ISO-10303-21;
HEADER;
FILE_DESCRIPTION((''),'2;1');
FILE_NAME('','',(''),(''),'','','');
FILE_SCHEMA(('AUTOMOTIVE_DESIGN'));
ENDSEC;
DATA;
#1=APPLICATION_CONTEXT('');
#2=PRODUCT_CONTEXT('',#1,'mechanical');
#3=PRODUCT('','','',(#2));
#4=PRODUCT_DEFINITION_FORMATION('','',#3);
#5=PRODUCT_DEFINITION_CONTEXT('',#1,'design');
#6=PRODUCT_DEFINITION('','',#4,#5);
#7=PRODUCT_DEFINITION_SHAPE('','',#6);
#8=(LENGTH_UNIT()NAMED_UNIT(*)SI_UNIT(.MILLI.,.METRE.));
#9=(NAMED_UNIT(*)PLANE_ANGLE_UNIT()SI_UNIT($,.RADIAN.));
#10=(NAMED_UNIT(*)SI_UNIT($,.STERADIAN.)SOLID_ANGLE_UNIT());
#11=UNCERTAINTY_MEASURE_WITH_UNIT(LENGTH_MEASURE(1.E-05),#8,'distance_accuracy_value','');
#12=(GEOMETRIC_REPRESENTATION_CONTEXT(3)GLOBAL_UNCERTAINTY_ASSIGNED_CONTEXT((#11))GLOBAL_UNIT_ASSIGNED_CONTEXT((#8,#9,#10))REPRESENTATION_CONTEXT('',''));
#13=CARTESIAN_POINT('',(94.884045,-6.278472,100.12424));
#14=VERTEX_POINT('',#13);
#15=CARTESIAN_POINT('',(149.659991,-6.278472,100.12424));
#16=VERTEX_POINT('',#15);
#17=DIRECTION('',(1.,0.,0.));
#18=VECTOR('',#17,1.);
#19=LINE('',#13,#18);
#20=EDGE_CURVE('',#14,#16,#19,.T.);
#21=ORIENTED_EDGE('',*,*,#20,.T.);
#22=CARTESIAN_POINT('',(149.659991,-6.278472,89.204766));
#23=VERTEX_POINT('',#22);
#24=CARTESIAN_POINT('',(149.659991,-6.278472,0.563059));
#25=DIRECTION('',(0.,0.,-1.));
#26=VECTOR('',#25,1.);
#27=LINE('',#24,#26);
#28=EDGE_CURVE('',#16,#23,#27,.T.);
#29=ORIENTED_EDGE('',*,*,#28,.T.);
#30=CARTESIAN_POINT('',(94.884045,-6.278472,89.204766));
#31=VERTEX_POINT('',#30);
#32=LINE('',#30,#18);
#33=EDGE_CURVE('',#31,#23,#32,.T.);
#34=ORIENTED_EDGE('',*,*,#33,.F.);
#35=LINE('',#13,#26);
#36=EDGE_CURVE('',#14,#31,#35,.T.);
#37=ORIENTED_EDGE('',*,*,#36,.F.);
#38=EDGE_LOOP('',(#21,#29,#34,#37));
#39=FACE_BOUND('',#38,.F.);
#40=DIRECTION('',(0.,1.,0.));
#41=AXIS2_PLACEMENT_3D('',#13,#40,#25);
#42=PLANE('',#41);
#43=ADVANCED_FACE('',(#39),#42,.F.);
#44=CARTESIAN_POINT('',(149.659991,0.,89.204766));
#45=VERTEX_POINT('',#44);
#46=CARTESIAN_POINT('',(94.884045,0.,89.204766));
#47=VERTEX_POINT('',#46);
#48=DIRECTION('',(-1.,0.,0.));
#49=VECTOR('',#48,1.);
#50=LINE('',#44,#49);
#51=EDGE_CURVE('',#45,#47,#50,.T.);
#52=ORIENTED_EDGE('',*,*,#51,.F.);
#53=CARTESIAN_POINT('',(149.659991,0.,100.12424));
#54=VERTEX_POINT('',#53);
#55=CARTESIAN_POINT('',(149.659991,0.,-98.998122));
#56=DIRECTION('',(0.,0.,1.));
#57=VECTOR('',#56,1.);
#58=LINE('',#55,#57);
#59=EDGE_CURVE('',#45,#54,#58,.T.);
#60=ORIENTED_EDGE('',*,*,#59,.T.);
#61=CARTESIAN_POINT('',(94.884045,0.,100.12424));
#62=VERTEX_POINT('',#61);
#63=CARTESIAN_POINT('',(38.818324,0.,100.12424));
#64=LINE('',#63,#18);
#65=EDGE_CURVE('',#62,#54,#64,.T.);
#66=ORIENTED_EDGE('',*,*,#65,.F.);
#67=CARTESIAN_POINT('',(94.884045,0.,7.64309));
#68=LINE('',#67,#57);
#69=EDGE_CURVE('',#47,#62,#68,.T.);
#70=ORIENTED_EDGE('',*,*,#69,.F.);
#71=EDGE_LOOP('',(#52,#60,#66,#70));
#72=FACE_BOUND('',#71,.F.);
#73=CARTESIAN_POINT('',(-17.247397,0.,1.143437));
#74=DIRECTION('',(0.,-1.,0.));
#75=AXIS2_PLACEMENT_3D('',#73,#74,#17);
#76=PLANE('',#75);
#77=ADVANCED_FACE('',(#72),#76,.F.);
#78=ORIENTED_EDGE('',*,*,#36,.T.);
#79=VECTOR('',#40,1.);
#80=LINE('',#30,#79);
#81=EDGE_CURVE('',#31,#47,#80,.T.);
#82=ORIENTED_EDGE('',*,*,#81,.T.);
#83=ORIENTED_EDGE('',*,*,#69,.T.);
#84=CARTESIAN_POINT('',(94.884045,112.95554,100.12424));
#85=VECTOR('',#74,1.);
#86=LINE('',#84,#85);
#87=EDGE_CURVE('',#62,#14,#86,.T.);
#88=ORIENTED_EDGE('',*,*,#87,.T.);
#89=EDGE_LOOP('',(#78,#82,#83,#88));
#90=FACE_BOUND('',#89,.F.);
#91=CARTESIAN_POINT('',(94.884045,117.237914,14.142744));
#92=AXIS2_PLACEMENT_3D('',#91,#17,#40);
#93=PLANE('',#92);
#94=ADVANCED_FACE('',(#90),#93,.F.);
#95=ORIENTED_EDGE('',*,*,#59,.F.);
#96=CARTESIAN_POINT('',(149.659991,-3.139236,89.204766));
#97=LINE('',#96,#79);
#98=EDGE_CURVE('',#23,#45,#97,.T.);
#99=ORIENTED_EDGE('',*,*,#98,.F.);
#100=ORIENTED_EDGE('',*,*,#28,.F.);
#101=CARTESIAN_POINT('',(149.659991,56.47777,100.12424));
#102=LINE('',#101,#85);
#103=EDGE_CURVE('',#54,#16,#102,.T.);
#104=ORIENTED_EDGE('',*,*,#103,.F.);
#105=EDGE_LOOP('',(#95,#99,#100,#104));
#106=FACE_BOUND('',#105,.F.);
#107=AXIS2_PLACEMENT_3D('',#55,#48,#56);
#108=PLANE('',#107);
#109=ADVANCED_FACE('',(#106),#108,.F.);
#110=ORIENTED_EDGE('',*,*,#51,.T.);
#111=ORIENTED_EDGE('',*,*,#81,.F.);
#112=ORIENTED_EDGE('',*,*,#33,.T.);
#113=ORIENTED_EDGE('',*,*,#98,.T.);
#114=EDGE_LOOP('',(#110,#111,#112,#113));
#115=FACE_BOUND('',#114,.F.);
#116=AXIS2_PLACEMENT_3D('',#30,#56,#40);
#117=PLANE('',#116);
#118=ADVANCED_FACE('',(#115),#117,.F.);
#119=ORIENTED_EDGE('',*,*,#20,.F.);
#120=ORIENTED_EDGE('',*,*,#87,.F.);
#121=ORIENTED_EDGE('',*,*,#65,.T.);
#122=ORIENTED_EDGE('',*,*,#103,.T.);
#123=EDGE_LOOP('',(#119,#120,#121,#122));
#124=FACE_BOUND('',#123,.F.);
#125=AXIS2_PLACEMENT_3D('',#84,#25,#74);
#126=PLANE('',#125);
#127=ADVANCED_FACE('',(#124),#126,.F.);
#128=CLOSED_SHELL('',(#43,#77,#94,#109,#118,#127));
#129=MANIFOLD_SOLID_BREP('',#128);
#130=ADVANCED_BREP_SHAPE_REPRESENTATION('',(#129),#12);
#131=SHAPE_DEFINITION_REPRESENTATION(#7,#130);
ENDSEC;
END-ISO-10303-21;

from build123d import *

# Parameters (mm, degrees)
F0_W     = 60.157597065
F0_H     = 193.3636292815
F1_DEPTH = 25.4
F2_W     = 95.6334322691
F2_H     = 193.3636292815
F3_DEPTH = 346.1655080318
F4_W     = 36.0463038087
F4_H     = 45.3125461936
F4_H_2   = 28.3587574959
F4_H_3   = 42.0287176967
F4_H_4   = 40.5834168196
F5_DEPTH = 25.4
F6_W     = 173.7615093589
F6_H     = 156.2834382057
F7_DEPTH = 25.4
F8_W     = 111.7356568575
F8_H     = 18.2048454881
F8_W_2   = 24.7079984665
F8_H_2   = 0.1422166824
F8_H_3   = 10.7772573829
F8_W_3   = 37.4475419521
F9_DEPTH = 3015.5396461487


with BuildPart() as f1:
    # F0 (on Front) → F1 (new body)
    with BuildSketch(Plane.XZ):
        Polygon((0, -95.5383777618), (0, 0), (0, 97.8252515197), (-34.4947949052, 97.8252515197), (-34.4947949052, -95.5383777618), align=None)
        Polygon((-34.4947949052, 97.8252515197), (0, 97.8252515197), (16.5538433939, 97.8252515197), (16.5538433939, 130.5804550648), (-34.4947949052, 130.5804550648), (-34.4947949052, 120.8282783628), align=None)
        Polygon((16.5538433939, -95.5383777618), (0, -95.5383777618), (-34.4947949052, -95.5383777618), (-34.4947949052, -108.2416400313), (16.5538433939, -108.2416400313), (16.5538433939, -98.9981219172), align=None)
        Polygon((95.6334322691, 97.8252515197), (95.6334322691, 0), (95.6334322691, -95.5383777618), (16.5538433939, -95.5383777618), (16.5538433939, -98.9981219172), (149.6599912643, -98.9981219172), (149.6599912643, 130.5804550648), (16.5538433939, 130.5804550648), (16.5538433939, 97.8252515197), align=None)
        with Locations((-64.5735934377, 1.1434368789)):
            Rectangle(F0_W, F0_H)
        Polygon((-94.6523919702, 97.8252515197), (-34.4947949052, 97.8252515197), (-34.4947949052, 120.8282783628), (-151.3080298901, 120.8282783628), (-151.3080298901, -95.5383777618), (-94.6523919702, -95.5383777618), align=None)
    extrude(amount=F1_DEPTH)

    # F2 (on face) → F3 (join)
    with BuildSketch(Plane(origin=(0, 0, 0), x_dir=(-1, 0, 0), z_dir=(0, 1, 0))):
        Polygon((151.3080298901, 108.881868422), (-95.6334322691, 108.881868422), (-95.6334322691, 97.8252515197), (0, 97.8252515197), (0, -95.5383777618), (-95.6334322691, -95.5383777618), (-95.6334322691, -98.9981219172), (-16.5538433939, -98.9981219172), (-16.5538433939, -108.2416400313), (34.4947949052, -108.2416400313), (34.4947949052, -95.5383777618), (151.3080298901, -95.5383777618), align=None)
        with Locations((-47.8167161345, 1.1434368789)):
            Rectangle(F2_W, F2_H)
    extrude(amount=-F3_DEPTH)

    # F4 (on face) → F5 (join)
    with BuildSketch(Plane(origin=(0, 0, 0), x_dir=(-1, 0, 0), z_dir=(0, 1, 0))):
        Polygon((78.8774639368, 89.2047658563), (-77.3589983582, 89.2047658563), (-77.3589983582, 43.8922196627), (-77.3589983582, 15.5334621668), (-77.3589983582, -26.4952555299), (-77.3589983582, -67.0786723495), (78.8774639368, -67.0786723495), align=None)
        with Locations((-95.3821502626, 66.5484927595)):
            Rectangle(F4_W, F4_H)
        with Locations((-95.3821502626, 29.7128409147)):
            Rectangle(F4_W, F4_H_2)
        with Locations((-95.3821502626, -5.4808966815)):
            Rectangle(F4_W, F4_H_3)
        with Locations((-95.3821502626, -46.7869639397)):
            Rectangle(F4_W, F4_H_4)
    extrude(amount=F5_DEPTH)

    # F6 (on face) → F7 (join)
    with BuildSketch(Plane(origin=(0, 25.4, 0), x_dir=(-1, 0, 0), z_dir=(0, 1, 0))):
        with Locations((-8.0032907426, 11.0630467534)):
            Rectangle(F6_W, F6_H)
    extrude(amount=F7_DEPTH)

    # F8 (on face) → F9 (intersect)
    with BuildSketch(Plane.YZ.offset(94.8840454221)):
        Polygon((50.8, 89.2047658563), (50.8, -67.0786723495), (74.874997139, -67.0786723495), (186.6106539965, -67.0786723495), (186.6106539965, 89.3469825387), (112.9555404186, 89.3469825387), (112.9555404186, 70.3727975488), (75.5079984665, 70.3727975488), (75.5079984665, 89.2047658563), align=None)
        with Locations((130.7428255677, -76.1810950935)):
            Rectangle(F8_W, F8_H)
        Polygon((-6.2784720212, 89.2047658563), (50.8, 89.2047658563), (50.8, 89.3469825387), (50.8, 100.1242399216), (-6.2784720212, 100.1242399216), align=None)
        with Locations((63.1539992332, 89.2758741975)):
            Rectangle(F8_W_2, F8_H_2)
        with Locations((63.1539992332, 94.7356112301)):
            Rectangle(F8_W_2, F8_H_3)
        Polygon((75.5079984665, 89.3469825387), (75.5079984665, 89.2047658563), (75.5079984665, 70.3727975488), (112.9555404186, 70.3727975488), (112.9555404186, 89.3469825387), align=None)
        with Locations((94.2317694426, 94.7356112301)):
            Rectangle(F8_W_3, F8_H_3)
    extrude(amount=F9_DEPTH, mode=Mode.INTERSECT)


solid = f1.part
